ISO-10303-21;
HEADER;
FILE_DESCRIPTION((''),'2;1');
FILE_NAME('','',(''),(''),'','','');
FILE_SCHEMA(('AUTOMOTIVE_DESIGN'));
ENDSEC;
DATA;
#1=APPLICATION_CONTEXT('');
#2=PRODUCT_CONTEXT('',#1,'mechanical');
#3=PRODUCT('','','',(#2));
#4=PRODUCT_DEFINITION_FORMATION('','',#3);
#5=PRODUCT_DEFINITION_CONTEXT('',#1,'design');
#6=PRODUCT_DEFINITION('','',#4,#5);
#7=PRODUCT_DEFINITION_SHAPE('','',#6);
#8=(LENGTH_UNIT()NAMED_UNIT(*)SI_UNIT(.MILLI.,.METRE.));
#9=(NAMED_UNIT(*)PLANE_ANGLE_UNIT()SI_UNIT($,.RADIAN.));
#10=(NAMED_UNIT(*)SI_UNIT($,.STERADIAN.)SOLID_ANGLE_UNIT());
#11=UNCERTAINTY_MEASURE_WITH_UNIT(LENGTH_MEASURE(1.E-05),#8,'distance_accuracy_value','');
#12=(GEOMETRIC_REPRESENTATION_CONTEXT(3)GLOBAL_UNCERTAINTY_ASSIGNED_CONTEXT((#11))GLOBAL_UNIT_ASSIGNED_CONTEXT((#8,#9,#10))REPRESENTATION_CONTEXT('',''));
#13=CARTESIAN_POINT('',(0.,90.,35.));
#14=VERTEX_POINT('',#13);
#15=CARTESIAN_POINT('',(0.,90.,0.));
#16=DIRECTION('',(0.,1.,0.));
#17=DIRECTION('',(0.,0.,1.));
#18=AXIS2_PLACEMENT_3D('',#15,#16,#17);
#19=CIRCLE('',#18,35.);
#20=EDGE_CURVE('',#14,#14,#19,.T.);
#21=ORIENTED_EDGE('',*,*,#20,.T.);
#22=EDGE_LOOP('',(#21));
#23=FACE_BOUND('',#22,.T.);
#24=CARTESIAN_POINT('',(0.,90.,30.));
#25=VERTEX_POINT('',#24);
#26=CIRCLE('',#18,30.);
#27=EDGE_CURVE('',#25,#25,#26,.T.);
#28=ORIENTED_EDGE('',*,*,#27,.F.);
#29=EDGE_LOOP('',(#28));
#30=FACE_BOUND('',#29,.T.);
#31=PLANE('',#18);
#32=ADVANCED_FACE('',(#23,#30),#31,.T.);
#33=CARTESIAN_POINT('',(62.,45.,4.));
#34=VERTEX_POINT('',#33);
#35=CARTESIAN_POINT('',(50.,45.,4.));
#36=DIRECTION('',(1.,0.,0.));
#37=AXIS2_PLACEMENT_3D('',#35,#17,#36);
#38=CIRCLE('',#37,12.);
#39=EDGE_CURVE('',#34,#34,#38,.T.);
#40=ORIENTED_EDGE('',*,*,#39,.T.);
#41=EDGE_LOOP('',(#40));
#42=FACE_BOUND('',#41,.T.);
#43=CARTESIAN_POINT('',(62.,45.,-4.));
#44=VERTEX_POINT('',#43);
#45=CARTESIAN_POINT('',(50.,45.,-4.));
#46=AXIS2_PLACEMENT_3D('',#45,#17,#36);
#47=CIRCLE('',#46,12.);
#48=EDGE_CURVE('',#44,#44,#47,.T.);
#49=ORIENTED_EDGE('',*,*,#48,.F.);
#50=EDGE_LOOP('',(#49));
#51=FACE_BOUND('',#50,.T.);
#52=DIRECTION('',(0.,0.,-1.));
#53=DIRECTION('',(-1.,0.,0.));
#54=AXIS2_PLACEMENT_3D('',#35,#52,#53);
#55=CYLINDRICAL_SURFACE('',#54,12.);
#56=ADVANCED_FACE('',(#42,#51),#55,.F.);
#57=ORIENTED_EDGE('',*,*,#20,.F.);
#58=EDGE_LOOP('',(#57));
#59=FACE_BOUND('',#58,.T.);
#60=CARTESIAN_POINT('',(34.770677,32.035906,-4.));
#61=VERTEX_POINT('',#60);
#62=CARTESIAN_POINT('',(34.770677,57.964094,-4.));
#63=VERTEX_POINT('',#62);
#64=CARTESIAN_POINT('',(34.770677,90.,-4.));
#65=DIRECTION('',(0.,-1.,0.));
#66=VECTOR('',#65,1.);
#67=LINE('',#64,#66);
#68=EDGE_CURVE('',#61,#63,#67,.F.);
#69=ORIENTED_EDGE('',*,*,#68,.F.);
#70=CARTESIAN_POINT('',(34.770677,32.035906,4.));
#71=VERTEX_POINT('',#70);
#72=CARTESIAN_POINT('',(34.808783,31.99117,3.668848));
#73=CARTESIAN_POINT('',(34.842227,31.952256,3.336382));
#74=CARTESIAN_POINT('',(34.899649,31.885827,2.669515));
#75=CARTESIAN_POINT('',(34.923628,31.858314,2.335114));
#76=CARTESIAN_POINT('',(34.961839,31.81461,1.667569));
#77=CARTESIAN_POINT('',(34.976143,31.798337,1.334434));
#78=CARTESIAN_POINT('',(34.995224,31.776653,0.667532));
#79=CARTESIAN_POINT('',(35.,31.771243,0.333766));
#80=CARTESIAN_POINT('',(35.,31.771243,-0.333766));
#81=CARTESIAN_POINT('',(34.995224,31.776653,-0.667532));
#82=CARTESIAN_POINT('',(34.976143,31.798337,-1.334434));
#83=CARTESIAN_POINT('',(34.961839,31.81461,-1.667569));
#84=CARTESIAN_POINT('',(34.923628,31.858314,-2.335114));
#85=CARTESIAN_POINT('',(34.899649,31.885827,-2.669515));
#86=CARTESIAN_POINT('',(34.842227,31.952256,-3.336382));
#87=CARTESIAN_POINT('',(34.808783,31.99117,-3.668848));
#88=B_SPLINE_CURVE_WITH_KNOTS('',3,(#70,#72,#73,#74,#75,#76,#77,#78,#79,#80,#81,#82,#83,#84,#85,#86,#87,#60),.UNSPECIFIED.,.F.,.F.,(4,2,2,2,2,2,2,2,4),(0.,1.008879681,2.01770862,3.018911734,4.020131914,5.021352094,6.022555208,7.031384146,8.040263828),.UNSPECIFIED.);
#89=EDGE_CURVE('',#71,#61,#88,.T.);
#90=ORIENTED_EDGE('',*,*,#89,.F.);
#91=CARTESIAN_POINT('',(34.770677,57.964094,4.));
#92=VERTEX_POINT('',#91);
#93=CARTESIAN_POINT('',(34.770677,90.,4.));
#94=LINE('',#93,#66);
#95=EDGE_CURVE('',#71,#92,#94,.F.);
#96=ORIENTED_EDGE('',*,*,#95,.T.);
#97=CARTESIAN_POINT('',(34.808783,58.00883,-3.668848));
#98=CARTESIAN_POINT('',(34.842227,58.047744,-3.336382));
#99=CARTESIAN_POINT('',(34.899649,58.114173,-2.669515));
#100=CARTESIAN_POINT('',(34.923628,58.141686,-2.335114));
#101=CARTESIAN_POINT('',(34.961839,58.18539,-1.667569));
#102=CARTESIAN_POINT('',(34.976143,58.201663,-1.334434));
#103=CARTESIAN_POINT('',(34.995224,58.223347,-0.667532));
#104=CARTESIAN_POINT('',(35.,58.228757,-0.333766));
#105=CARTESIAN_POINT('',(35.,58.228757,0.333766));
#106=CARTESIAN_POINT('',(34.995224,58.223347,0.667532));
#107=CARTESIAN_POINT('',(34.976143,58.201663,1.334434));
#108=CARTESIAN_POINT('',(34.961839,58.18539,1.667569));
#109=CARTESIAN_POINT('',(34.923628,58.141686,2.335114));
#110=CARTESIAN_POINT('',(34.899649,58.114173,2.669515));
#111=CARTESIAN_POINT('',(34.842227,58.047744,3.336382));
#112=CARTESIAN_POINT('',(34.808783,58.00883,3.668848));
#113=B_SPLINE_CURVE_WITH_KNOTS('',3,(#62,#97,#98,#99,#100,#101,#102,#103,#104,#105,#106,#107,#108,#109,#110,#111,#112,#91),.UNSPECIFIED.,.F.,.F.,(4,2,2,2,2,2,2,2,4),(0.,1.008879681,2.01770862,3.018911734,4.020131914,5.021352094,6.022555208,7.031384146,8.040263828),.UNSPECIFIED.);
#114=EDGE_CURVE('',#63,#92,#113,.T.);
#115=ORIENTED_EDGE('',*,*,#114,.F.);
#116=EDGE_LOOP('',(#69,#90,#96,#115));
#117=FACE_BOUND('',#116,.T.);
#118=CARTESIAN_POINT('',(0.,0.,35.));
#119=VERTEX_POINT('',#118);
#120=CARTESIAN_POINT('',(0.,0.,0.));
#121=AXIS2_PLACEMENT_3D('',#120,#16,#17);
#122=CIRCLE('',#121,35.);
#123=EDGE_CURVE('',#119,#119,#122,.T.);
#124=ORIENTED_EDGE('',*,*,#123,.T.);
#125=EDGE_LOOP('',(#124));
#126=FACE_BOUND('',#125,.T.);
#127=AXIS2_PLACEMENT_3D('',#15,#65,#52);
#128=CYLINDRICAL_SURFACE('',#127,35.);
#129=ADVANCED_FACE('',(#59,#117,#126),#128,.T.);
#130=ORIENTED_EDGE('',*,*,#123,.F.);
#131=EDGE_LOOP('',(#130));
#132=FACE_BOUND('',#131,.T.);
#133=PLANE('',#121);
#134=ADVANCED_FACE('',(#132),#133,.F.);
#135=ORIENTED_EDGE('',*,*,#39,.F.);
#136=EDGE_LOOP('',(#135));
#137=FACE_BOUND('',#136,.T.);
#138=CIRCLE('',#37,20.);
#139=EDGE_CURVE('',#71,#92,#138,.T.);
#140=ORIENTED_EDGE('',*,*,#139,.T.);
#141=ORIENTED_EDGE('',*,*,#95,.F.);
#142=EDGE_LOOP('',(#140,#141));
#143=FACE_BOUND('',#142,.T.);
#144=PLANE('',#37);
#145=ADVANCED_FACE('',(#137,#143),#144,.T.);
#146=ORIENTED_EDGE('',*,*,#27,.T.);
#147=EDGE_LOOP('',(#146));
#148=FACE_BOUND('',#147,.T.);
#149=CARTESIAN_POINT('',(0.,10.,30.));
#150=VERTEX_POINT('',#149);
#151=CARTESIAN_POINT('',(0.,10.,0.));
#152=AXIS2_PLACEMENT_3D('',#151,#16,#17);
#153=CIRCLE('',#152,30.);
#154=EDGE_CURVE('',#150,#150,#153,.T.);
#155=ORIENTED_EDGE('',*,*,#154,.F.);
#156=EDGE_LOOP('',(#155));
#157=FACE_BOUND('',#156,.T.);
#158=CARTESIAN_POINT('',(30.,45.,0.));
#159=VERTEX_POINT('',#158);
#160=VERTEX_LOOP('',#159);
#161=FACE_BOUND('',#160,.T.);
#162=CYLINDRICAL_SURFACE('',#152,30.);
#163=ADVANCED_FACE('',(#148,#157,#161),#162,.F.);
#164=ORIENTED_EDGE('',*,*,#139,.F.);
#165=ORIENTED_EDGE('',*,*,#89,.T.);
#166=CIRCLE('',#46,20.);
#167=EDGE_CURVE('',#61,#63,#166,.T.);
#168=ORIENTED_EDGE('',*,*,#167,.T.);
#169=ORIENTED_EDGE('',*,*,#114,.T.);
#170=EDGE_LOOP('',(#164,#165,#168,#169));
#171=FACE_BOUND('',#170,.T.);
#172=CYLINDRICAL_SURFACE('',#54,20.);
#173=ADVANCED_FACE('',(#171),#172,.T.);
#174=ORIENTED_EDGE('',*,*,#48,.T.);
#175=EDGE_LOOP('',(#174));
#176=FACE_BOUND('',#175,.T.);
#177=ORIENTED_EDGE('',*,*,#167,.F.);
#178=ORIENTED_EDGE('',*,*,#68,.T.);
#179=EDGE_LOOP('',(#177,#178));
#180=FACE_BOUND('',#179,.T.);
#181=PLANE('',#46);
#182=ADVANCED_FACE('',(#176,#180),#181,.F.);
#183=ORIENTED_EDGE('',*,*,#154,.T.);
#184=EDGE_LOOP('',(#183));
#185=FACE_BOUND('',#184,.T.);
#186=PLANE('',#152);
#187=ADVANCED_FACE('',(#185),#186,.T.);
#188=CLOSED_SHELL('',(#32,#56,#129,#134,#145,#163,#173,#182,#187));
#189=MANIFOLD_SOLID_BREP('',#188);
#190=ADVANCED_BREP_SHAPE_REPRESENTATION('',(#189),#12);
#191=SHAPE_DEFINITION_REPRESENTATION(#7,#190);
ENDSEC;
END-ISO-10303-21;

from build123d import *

# Parameters (mm, degrees)
SKETCH_1_R            = 35
EXTRUDE_1_DEPTH       = 90
SKETCH_3_R            = 30
CUT_EXTRUDE_1_DEPTH   = 80
EXTRUDE_START         = -4
EXTRUDE_3_OUTLINE_R   = 20
EXTRUDE_3_OUTLINE_R_2 = 12
EXTRUDE_3_DEPTH       = 8


# Read off the part's stored shape, not the designer's step: 凸台-拉伸3
with BuildPart() as part:
    # 草图1 → 凸台-拉伸1 (new body)
    with BuildSketch(Plane(origin=(0, 0, 0), x_dir=(1, 0, 0), z_dir=(0, 1, 0))):
        with Locations(Location((0, 0, 0), (0, 0, 90))):
            Circle(SKETCH_1_R)
    extrude(amount=EXTRUDE_1_DEPTH)

    # 草图3 → 切除-拉伸1 (cut)
    with BuildSketch(Plane(origin=(0, 90, 0), x_dir=(1, 0, 0), z_dir=(0, 1, 0))):
        with Locations(Location((0, 0, 0), (0, 0, 270))):
            Circle(SKETCH_3_R)
    extrude(amount=-CUT_EXTRUDE_1_DEPTH, mode=Mode.SUBTRACT)

    # 凸台-拉伸3 outline → 凸台-拉伸3 (add)
    with BuildSketch(Plane.XY.offset(EXTRUDE_START)):
        with Locations((50, 45)):
            Circle(EXTRUDE_3_OUTLINE_R)
        with Locations((50, 45)):
            Circle(EXTRUDE_3_OUTLINE_R_2, mode=Mode.SUBTRACT)
    extrude(amount=EXTRUDE_3_DEPTH)


solid = part.part
